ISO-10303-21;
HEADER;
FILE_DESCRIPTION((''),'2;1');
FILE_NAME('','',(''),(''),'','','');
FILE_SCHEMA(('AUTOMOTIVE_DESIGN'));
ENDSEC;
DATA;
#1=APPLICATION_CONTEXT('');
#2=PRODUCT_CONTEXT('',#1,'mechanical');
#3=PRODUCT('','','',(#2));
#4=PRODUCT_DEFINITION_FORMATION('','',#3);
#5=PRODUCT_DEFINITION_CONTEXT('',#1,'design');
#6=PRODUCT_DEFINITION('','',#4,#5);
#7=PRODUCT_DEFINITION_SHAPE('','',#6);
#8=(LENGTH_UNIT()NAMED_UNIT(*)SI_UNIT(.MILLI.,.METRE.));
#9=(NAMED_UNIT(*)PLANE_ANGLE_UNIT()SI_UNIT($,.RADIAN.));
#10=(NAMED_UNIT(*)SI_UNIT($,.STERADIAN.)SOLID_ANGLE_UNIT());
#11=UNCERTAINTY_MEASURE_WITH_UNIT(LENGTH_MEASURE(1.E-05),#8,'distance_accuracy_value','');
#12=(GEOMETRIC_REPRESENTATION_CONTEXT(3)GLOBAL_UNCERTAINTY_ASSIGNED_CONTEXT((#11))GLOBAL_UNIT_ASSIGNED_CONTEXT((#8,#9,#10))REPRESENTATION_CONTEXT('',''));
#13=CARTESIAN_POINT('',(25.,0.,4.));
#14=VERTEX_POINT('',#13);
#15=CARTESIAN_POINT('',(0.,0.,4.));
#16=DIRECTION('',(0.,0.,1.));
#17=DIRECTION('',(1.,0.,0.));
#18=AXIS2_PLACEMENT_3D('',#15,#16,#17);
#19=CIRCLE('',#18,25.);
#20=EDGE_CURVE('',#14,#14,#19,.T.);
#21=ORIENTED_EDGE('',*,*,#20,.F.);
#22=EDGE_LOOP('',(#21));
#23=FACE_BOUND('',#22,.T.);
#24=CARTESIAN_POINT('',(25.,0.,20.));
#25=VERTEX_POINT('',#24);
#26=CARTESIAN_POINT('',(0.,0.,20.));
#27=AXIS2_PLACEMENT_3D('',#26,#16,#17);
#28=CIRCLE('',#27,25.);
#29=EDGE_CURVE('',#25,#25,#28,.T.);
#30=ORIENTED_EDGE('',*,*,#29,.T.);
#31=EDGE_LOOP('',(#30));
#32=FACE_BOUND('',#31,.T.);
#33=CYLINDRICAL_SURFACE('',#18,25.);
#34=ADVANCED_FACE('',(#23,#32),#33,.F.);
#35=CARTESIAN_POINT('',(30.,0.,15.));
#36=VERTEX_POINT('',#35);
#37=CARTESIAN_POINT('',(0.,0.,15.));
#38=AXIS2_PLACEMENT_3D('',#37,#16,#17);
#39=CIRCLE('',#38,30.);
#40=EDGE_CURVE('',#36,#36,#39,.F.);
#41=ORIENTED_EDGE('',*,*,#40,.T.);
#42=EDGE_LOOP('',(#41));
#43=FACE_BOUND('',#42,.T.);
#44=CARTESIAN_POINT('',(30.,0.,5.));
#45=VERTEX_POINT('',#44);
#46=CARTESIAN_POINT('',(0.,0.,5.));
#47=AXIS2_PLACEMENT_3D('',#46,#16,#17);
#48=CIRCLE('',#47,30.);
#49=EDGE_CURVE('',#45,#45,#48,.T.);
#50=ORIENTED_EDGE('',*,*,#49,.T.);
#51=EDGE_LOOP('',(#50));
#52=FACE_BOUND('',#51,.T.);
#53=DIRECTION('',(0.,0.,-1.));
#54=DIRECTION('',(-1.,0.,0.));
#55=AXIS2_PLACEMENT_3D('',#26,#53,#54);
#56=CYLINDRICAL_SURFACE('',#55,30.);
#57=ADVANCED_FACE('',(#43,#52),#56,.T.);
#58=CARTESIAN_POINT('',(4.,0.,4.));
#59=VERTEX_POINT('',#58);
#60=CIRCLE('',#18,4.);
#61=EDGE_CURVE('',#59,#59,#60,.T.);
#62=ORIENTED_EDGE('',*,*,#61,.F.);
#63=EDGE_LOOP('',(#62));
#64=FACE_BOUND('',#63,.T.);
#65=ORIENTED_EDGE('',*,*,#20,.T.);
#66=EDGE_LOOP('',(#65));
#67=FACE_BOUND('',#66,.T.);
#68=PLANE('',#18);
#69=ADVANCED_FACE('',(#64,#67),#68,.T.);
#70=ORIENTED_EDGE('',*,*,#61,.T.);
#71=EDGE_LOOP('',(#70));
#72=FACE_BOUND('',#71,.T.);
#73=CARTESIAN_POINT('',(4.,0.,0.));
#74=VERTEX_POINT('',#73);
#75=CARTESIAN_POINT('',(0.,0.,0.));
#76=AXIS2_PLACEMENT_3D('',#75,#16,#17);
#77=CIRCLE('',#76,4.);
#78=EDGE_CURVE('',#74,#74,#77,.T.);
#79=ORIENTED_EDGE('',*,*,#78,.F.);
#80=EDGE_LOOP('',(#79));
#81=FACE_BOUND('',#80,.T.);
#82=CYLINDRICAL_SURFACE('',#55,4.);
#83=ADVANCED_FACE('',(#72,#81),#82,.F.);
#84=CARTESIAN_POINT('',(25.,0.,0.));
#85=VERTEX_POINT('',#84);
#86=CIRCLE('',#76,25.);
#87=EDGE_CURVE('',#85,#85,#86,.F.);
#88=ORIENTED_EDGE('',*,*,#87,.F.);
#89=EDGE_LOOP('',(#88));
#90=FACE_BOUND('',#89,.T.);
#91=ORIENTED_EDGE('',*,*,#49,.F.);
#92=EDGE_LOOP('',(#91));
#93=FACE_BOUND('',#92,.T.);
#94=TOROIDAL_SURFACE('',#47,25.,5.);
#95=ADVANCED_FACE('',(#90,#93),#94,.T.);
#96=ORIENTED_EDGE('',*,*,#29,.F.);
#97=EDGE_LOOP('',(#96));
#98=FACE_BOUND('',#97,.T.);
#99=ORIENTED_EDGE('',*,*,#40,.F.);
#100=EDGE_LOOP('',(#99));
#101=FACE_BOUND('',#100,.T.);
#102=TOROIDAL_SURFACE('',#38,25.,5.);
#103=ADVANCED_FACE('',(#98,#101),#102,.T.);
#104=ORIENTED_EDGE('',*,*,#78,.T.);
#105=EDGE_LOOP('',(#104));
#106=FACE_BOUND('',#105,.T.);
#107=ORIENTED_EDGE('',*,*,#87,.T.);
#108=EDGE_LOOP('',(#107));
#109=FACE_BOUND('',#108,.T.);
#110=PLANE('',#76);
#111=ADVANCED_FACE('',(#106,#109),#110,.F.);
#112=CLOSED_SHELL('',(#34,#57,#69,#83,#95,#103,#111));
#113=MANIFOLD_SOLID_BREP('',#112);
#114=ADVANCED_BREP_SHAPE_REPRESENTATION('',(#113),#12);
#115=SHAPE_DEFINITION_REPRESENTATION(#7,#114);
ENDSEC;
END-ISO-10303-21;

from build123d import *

# Parameters (mm, degrees)
SKETCH_1_R          = 30
SKETCH_1_R_2        = 4
EXTRUDE_1_DEPTH     = 20
SKETCH_2_R          = 25
CUT_EXTRUDE_1_DEPTH = 16
FILLET_1_R          = 5


with BuildPart() as part:
    # 草图1 → 凸台-拉伸1 (new body)
    with BuildSketch(Plane.XY):
        Circle(SKETCH_1_R)
        Circle(SKETCH_1_R_2, mode=Mode.SUBTRACT)
    extrude(amount=EXTRUDE_1_DEPTH)

    # 草图2 → 切除-拉伸1 (cut)
    with BuildSketch(Plane.XY.offset(20)):
        Circle(SKETCH_2_R)
    extrude(amount=-CUT_EXTRUDE_1_DEPTH, mode=Mode.SUBTRACT)

    # 圆角1
    fillet_1_edges = [part.edges().sort_by_distance(p)[0] for p in [
        (-30, 0, 0),
        (-30, 0, 20),
    ]]
    fillet(fillet_1_edges, radius=FILLET_1_R - 0.0001)  # a hair under: the kernel refuses the full size


solid = part.part
